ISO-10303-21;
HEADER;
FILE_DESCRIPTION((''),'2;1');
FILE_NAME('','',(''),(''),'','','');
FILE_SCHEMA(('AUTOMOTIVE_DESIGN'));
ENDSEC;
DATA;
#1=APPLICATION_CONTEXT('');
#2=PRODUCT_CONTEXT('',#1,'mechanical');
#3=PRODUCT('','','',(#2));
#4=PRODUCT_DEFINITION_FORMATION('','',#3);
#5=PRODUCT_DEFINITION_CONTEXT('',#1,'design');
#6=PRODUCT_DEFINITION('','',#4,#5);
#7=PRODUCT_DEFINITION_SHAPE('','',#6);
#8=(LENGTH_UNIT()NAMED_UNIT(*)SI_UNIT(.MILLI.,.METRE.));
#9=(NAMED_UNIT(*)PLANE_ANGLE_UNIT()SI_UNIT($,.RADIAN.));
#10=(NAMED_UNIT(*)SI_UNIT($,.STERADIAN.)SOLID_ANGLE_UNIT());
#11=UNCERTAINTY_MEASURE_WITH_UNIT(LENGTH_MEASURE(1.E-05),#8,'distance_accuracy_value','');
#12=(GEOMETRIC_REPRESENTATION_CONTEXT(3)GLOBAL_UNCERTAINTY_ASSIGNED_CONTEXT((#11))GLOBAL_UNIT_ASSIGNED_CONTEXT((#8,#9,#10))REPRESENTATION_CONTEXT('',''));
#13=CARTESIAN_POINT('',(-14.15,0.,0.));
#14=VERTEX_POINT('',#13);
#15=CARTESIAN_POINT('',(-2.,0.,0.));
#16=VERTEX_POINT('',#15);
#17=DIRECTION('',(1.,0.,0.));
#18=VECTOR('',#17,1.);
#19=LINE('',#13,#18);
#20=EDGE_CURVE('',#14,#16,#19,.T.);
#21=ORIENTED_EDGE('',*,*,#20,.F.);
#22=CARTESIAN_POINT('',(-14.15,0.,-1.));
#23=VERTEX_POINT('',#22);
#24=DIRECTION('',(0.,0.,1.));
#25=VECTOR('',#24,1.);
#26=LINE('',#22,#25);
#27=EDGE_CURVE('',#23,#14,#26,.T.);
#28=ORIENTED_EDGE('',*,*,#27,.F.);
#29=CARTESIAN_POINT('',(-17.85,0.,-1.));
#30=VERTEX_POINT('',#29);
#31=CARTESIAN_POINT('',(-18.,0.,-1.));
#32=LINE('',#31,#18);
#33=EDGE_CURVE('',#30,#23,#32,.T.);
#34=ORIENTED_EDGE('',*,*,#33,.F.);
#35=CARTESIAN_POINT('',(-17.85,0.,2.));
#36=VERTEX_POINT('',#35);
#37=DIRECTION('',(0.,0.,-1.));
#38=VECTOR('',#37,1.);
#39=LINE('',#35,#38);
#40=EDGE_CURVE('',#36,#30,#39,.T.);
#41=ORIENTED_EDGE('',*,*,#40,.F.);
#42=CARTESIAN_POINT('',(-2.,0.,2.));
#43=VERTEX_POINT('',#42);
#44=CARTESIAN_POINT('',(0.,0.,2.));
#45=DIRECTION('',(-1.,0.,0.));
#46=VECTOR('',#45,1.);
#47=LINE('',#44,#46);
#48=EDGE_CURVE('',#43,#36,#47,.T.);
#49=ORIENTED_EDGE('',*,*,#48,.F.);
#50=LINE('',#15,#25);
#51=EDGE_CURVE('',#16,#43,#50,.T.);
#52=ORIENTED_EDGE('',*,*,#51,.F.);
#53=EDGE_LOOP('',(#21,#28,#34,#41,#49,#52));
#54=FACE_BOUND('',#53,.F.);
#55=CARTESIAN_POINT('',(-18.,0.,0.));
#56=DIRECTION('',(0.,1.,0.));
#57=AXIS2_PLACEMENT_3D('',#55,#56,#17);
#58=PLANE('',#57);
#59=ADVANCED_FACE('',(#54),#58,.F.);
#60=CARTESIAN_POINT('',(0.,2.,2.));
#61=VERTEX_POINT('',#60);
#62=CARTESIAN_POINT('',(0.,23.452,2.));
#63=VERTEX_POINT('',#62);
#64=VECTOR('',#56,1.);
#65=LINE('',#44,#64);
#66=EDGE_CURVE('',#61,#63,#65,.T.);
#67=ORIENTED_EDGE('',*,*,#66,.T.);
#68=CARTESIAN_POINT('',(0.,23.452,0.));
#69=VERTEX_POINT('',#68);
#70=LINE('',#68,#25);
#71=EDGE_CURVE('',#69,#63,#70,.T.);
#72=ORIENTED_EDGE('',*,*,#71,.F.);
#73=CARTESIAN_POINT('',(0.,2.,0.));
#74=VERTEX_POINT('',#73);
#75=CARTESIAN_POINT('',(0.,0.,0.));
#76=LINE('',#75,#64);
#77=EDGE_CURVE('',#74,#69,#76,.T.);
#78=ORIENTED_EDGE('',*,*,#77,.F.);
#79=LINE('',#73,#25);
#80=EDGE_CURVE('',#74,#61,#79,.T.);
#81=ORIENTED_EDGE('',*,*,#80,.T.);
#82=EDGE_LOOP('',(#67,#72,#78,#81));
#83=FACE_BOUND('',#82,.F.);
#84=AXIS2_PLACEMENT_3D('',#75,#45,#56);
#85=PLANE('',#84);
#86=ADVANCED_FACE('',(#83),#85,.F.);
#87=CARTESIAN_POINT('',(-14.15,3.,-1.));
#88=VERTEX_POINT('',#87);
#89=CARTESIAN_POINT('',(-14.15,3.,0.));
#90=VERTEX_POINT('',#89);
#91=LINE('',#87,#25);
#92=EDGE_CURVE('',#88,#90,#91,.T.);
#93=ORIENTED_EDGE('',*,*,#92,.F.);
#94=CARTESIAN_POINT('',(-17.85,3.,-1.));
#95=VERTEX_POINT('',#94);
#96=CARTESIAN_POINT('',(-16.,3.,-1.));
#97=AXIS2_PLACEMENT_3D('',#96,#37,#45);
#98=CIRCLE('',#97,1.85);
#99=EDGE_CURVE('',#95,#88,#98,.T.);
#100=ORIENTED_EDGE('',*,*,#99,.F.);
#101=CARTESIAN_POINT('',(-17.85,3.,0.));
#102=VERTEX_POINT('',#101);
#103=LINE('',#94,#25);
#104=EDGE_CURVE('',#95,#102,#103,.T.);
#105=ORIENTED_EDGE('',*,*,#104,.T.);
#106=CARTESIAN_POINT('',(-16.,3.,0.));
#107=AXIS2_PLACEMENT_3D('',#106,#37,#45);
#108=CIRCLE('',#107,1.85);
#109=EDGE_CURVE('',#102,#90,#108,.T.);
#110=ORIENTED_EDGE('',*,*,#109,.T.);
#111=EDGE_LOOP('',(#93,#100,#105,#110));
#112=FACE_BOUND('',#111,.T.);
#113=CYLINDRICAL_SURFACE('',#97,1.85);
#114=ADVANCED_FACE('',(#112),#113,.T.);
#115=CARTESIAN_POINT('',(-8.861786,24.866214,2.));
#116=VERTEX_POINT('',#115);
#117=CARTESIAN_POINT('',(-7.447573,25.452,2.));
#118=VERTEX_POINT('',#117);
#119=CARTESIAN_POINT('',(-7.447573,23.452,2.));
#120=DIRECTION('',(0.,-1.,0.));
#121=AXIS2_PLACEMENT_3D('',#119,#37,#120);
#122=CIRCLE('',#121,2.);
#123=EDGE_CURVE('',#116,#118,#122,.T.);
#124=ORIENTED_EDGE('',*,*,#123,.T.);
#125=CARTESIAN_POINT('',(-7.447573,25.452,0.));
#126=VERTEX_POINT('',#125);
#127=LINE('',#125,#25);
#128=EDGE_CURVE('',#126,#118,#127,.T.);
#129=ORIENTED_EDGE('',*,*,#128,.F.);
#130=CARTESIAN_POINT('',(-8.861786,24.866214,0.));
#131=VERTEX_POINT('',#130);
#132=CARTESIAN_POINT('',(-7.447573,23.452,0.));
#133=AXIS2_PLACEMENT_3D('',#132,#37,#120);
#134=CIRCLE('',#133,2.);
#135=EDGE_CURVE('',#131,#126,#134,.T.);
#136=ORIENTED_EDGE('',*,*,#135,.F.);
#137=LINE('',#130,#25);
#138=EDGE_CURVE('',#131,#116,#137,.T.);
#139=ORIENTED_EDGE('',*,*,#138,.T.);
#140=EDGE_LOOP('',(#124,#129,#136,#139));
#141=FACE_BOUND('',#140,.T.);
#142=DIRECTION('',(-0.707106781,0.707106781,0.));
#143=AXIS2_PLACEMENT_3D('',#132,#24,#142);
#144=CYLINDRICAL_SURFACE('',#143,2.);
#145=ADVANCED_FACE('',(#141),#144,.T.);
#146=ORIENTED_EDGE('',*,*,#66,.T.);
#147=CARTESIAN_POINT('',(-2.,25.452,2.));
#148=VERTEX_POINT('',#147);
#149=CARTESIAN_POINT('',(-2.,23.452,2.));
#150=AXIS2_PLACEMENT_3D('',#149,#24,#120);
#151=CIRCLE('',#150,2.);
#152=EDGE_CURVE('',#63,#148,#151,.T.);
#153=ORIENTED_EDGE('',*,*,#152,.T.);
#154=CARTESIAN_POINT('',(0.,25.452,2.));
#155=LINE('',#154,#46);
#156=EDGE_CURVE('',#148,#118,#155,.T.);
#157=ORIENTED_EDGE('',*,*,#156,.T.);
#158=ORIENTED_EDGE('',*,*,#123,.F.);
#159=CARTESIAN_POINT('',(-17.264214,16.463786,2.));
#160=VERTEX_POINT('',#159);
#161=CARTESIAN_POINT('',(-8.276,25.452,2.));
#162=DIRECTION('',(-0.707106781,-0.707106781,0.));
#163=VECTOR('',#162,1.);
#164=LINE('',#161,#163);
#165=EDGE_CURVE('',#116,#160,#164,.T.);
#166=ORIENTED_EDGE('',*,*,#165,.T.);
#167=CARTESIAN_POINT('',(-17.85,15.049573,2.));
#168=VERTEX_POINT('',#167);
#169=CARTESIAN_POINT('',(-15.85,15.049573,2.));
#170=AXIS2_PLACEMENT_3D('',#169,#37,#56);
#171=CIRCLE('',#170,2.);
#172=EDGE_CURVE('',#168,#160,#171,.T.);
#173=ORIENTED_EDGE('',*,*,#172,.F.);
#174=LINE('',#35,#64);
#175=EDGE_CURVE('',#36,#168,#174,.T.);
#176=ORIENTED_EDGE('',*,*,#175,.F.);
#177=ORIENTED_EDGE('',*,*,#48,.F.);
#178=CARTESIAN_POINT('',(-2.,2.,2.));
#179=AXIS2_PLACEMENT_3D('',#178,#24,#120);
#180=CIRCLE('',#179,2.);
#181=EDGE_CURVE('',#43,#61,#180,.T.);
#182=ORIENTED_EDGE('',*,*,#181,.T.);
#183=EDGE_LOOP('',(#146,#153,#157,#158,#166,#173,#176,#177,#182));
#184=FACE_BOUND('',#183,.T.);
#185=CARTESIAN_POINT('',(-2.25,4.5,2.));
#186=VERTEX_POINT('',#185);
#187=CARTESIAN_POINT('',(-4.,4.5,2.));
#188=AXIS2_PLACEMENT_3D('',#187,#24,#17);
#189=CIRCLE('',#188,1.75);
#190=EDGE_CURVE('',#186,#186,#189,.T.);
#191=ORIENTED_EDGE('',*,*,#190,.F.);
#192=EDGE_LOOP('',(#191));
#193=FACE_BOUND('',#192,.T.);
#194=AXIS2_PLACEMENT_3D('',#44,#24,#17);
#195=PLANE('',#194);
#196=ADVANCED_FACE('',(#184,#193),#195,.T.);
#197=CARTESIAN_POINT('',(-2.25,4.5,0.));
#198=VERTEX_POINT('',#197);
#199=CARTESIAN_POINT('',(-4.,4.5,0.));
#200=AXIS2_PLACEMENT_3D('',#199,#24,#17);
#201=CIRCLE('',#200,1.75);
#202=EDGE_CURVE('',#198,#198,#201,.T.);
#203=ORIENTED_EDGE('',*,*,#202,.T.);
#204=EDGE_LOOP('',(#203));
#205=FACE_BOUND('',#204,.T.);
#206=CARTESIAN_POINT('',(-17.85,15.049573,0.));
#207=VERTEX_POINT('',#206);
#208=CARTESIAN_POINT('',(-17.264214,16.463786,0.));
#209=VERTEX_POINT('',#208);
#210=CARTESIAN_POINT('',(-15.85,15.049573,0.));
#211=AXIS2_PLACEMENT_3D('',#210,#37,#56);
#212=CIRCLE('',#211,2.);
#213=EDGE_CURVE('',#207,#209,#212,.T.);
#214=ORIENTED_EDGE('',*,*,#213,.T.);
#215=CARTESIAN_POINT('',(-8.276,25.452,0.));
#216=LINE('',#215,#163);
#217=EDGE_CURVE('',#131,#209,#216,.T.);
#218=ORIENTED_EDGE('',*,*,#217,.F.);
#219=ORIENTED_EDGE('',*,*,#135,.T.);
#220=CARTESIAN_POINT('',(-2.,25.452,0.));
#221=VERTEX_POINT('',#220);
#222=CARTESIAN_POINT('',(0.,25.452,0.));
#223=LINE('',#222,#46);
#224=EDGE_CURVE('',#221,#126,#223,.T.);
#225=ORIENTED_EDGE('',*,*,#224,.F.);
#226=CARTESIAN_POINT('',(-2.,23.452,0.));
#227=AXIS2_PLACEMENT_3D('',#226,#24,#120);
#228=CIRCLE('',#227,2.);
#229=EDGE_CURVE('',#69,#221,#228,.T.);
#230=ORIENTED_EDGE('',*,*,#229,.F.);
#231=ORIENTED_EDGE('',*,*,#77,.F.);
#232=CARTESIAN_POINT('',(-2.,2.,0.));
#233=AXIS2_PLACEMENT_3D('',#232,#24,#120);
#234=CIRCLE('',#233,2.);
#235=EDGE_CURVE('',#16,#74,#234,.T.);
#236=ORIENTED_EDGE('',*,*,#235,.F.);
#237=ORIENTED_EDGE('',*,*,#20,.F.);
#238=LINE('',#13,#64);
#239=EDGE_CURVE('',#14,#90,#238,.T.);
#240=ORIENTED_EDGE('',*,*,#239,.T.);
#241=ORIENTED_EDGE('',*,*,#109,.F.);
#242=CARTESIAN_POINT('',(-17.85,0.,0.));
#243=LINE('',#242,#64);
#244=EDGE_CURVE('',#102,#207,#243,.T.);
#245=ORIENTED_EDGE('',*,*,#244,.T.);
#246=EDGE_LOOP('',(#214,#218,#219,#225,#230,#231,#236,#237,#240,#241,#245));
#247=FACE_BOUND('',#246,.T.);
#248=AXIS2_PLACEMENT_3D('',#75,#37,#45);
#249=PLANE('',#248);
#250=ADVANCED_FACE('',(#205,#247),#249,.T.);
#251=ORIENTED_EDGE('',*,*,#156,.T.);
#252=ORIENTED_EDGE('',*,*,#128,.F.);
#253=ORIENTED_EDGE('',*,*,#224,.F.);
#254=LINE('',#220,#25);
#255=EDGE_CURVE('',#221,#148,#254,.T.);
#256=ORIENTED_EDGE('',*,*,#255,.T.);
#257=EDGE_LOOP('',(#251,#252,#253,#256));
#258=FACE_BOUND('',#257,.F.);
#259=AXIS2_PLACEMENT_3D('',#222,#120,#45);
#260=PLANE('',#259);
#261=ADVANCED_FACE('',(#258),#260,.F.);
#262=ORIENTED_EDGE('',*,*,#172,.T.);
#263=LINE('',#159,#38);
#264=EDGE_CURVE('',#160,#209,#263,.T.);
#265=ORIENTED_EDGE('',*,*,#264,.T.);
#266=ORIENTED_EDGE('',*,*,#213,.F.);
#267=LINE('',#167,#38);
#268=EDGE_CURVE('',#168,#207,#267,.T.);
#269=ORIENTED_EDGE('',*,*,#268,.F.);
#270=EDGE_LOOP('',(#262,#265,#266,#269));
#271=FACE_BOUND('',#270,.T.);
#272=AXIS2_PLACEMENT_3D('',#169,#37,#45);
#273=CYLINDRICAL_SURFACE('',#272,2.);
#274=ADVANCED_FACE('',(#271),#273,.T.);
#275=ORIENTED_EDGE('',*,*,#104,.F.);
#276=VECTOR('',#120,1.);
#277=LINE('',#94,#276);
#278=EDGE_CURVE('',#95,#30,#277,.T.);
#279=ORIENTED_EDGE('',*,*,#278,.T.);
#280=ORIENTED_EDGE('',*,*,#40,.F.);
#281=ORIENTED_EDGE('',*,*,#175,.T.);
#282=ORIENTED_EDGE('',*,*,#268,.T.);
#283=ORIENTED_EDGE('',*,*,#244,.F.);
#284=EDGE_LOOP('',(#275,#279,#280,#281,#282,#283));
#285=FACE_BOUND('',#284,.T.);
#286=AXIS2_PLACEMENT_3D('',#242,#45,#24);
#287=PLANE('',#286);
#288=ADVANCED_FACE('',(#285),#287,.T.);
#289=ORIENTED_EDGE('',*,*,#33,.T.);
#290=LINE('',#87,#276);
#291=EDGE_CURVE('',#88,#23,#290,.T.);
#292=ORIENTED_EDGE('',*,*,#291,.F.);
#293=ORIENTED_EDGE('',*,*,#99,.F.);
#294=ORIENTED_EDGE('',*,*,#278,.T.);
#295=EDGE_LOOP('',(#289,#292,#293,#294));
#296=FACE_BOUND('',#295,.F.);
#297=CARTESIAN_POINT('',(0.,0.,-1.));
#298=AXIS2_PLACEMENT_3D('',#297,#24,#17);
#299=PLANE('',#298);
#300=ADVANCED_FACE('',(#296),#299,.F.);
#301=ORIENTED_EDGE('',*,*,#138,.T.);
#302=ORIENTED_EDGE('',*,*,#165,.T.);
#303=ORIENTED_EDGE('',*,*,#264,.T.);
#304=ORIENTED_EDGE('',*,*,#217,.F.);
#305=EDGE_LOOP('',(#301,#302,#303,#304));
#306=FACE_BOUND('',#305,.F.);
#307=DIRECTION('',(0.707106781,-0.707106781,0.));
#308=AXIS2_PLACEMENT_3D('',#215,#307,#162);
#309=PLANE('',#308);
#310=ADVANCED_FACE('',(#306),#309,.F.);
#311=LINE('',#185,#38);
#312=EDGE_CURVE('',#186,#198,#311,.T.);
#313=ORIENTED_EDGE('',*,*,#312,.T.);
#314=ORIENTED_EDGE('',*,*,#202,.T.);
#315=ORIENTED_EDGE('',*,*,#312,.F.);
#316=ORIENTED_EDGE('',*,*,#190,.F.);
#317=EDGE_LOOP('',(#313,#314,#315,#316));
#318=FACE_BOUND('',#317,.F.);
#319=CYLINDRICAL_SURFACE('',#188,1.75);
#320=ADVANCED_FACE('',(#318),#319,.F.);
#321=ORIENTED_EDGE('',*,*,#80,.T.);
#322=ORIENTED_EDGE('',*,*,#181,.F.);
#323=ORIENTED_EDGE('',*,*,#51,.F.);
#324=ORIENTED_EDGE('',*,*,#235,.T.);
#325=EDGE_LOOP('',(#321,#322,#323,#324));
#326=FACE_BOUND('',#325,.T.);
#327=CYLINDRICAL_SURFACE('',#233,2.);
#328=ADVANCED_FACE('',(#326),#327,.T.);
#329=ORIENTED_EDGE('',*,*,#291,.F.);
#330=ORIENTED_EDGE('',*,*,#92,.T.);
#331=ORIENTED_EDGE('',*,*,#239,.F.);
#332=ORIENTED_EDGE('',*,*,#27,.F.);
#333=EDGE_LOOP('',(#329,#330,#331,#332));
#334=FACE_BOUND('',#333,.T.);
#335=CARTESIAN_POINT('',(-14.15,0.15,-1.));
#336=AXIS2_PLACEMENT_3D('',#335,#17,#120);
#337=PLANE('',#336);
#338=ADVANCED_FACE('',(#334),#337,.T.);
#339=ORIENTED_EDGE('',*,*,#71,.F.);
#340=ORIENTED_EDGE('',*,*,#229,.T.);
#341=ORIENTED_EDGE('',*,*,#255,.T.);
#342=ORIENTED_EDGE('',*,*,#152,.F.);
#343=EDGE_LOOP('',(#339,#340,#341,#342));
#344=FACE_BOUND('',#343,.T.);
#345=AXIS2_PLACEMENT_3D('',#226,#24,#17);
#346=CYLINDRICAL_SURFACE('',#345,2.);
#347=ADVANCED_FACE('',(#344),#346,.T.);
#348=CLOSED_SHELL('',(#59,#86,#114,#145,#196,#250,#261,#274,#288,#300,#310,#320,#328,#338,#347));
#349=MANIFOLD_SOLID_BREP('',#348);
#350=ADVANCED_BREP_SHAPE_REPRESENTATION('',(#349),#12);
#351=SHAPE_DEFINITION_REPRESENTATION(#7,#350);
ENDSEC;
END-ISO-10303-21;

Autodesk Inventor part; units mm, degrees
ref_plane "YZ Plane" through (0, 0, 0) normal (1, 0, 0) x (0, 1, 0)
ref_plane "XZ Plane" through (0, 0, 0) normal (0, 1, 0) x (-1, 0, 0)
ref_plane "XY Plane" through (0, 0, 0) normal (0, 0, 1) x (1, 0, 0)
sketch "Sketch1" plane through (0, 0, 0) normal (0, 0, 1) x (1, 0, 0)
  line L0 (0, 0) -> (0, 25.452)
  line L1 (0, 25.452) -> (-8.276, 25.452)
  line L2 (-8.276, 25.452) -> (-18, 15.728)
  line L3 (-18, 15.728) -> (-18, 0)
  line L4 (-18, 0) -> (0, 0)
  dimension "d0" = 8.276
  dimension "d1" = 18
  dimension "d2" = 135
  dimension "d3" = 25.452
extrude "Extrusion1" add sketch "Sketch1" along normal blind 2
sketch "Sketch2" plane through (0, 0, 2) normal (0, 0, 1) x (1, 0, 0)
  line L0 (0, 25.452) -> (-8.276, 25.452) projected
  line L1 (-8.276, 25.452) -> (-18, 15.728) projected
  line L2 (-18, 15.728) -> (-18, 0) projected
  line L3 (-18, 0) -> (0, 0) projected
  line L4 (0, 0) -> (0, 25.452) projected
  line L5 (-18, 0) -> (0, 0) projected
  line L6 (-14, 0) -> (-14, 3)
  arc A0 (-14, 3) -> (-18, 3) centre (-16, 3) ccw
  dimension "d6" = 4
  dimension "d7" = 3
  dimension "d8" = 2
extrude "Extrusion2" add sketch "Sketch2" against normal blind 3 contours L3 L2 A0 L6
sketch "Sketch7" plane through (0, 0, -1) normal (0, 0, -1) x (-1, 0, 0)
  line L0 (18, 0) -> (18, 3) projected
  arc A0 (18, 3) -> (14, 3) centre (16, 3) ccw projected
  line L1 (14, 3) -> (14, 0) projected
  line L2 (14, 0) -> (18, 0) projected
  arc A1 (17.85, 3) -> (14.15, 3) centre (16, 3) ccw
  line L3 (17.85, 3) -> (17.85, 0.15)
  line L4 (17.85, 0.15) -> (14.15, 0.15)
  line L5 (14.15, 0.15) -> (14.15, 3)
  line L6 (14.15, 0.15) -> (14.15, 0)
  line L7 (17.85, 0.15) -> (17.85, 0)
  point P0 (0, 0)
  dimension "d24" = 0.15
extrude "Extrusion6" cut sketch "Sketch7" against normal up to surface (1 mm away) contours L2 L7 L3 A1 L5 L6 L1 A0 L0
sketch "Sketch4" plane through (0, 0, 2) normal (0, 0, 1) x (1, 0, 0)
  circle A0 centre (-4, 4.5) radius 1.75
  line L0 (-18, 15.728) -> (-18, 0) projected
  line L1 (-18, 0) -> (0, 0) projected
  point P0 (-14.15, 0)
  point P1 (-18, 3)
  point P2 (-14, 0)
  dimension "d14" = 3.5
  dimension "d15" = 14
  dimension "d16" = 4.5
extrude "Extrusion4" cut sketch "Sketch4" against normal up to surface (2 mm away)
sketch "Sketch5" plane through (-18, 0, 0) normal (-1, 0, 0) x (0, 0, 1)
  line L0 (2, 15.728) -> (2, 0) projected
  line L1 (0, 15.728) -> (2, 15.728) projected
  line L2 (2, 0) -> (2, 25.452) projected
  line L3 (0, 15.728) -> (2, 15.728)
  line L4 (2, 15.728) -> (2, 19.0295)
  line L5 (2, 19.0295) -> (0, 19.0295)
  line L6 (0, 19.0295) -> (0, 15.728)
  line L7 (0, 15.728) -> (0, 0) projected
  line L8 (0, 0) -> (2, 0) projected
  point P0 (0, 0)
extrude "Extrusion5" cut sketch "Sketch5" against normal up to surface (0.15 mm away)
fillet "Fillet1" radius 2 4 edges at (-8.276, 25.452, 1) (-17.85, 15.878, 1) (0, 25.452, 1) (0, 0, 1)
sketch "Sketch6" plane through (0, 0, 2) normal (0, 0, 1) x (1, 0, 0)
  circle A0 centre (1.75, 1.9974) radius 1.5
  line L0 (0, 2) -> (0, 23.452) projected
  point P0 (0, 0)
  dimension "d22" = 3
  dimension "d23" = 1.75
properties part number "ScrewStopper"
